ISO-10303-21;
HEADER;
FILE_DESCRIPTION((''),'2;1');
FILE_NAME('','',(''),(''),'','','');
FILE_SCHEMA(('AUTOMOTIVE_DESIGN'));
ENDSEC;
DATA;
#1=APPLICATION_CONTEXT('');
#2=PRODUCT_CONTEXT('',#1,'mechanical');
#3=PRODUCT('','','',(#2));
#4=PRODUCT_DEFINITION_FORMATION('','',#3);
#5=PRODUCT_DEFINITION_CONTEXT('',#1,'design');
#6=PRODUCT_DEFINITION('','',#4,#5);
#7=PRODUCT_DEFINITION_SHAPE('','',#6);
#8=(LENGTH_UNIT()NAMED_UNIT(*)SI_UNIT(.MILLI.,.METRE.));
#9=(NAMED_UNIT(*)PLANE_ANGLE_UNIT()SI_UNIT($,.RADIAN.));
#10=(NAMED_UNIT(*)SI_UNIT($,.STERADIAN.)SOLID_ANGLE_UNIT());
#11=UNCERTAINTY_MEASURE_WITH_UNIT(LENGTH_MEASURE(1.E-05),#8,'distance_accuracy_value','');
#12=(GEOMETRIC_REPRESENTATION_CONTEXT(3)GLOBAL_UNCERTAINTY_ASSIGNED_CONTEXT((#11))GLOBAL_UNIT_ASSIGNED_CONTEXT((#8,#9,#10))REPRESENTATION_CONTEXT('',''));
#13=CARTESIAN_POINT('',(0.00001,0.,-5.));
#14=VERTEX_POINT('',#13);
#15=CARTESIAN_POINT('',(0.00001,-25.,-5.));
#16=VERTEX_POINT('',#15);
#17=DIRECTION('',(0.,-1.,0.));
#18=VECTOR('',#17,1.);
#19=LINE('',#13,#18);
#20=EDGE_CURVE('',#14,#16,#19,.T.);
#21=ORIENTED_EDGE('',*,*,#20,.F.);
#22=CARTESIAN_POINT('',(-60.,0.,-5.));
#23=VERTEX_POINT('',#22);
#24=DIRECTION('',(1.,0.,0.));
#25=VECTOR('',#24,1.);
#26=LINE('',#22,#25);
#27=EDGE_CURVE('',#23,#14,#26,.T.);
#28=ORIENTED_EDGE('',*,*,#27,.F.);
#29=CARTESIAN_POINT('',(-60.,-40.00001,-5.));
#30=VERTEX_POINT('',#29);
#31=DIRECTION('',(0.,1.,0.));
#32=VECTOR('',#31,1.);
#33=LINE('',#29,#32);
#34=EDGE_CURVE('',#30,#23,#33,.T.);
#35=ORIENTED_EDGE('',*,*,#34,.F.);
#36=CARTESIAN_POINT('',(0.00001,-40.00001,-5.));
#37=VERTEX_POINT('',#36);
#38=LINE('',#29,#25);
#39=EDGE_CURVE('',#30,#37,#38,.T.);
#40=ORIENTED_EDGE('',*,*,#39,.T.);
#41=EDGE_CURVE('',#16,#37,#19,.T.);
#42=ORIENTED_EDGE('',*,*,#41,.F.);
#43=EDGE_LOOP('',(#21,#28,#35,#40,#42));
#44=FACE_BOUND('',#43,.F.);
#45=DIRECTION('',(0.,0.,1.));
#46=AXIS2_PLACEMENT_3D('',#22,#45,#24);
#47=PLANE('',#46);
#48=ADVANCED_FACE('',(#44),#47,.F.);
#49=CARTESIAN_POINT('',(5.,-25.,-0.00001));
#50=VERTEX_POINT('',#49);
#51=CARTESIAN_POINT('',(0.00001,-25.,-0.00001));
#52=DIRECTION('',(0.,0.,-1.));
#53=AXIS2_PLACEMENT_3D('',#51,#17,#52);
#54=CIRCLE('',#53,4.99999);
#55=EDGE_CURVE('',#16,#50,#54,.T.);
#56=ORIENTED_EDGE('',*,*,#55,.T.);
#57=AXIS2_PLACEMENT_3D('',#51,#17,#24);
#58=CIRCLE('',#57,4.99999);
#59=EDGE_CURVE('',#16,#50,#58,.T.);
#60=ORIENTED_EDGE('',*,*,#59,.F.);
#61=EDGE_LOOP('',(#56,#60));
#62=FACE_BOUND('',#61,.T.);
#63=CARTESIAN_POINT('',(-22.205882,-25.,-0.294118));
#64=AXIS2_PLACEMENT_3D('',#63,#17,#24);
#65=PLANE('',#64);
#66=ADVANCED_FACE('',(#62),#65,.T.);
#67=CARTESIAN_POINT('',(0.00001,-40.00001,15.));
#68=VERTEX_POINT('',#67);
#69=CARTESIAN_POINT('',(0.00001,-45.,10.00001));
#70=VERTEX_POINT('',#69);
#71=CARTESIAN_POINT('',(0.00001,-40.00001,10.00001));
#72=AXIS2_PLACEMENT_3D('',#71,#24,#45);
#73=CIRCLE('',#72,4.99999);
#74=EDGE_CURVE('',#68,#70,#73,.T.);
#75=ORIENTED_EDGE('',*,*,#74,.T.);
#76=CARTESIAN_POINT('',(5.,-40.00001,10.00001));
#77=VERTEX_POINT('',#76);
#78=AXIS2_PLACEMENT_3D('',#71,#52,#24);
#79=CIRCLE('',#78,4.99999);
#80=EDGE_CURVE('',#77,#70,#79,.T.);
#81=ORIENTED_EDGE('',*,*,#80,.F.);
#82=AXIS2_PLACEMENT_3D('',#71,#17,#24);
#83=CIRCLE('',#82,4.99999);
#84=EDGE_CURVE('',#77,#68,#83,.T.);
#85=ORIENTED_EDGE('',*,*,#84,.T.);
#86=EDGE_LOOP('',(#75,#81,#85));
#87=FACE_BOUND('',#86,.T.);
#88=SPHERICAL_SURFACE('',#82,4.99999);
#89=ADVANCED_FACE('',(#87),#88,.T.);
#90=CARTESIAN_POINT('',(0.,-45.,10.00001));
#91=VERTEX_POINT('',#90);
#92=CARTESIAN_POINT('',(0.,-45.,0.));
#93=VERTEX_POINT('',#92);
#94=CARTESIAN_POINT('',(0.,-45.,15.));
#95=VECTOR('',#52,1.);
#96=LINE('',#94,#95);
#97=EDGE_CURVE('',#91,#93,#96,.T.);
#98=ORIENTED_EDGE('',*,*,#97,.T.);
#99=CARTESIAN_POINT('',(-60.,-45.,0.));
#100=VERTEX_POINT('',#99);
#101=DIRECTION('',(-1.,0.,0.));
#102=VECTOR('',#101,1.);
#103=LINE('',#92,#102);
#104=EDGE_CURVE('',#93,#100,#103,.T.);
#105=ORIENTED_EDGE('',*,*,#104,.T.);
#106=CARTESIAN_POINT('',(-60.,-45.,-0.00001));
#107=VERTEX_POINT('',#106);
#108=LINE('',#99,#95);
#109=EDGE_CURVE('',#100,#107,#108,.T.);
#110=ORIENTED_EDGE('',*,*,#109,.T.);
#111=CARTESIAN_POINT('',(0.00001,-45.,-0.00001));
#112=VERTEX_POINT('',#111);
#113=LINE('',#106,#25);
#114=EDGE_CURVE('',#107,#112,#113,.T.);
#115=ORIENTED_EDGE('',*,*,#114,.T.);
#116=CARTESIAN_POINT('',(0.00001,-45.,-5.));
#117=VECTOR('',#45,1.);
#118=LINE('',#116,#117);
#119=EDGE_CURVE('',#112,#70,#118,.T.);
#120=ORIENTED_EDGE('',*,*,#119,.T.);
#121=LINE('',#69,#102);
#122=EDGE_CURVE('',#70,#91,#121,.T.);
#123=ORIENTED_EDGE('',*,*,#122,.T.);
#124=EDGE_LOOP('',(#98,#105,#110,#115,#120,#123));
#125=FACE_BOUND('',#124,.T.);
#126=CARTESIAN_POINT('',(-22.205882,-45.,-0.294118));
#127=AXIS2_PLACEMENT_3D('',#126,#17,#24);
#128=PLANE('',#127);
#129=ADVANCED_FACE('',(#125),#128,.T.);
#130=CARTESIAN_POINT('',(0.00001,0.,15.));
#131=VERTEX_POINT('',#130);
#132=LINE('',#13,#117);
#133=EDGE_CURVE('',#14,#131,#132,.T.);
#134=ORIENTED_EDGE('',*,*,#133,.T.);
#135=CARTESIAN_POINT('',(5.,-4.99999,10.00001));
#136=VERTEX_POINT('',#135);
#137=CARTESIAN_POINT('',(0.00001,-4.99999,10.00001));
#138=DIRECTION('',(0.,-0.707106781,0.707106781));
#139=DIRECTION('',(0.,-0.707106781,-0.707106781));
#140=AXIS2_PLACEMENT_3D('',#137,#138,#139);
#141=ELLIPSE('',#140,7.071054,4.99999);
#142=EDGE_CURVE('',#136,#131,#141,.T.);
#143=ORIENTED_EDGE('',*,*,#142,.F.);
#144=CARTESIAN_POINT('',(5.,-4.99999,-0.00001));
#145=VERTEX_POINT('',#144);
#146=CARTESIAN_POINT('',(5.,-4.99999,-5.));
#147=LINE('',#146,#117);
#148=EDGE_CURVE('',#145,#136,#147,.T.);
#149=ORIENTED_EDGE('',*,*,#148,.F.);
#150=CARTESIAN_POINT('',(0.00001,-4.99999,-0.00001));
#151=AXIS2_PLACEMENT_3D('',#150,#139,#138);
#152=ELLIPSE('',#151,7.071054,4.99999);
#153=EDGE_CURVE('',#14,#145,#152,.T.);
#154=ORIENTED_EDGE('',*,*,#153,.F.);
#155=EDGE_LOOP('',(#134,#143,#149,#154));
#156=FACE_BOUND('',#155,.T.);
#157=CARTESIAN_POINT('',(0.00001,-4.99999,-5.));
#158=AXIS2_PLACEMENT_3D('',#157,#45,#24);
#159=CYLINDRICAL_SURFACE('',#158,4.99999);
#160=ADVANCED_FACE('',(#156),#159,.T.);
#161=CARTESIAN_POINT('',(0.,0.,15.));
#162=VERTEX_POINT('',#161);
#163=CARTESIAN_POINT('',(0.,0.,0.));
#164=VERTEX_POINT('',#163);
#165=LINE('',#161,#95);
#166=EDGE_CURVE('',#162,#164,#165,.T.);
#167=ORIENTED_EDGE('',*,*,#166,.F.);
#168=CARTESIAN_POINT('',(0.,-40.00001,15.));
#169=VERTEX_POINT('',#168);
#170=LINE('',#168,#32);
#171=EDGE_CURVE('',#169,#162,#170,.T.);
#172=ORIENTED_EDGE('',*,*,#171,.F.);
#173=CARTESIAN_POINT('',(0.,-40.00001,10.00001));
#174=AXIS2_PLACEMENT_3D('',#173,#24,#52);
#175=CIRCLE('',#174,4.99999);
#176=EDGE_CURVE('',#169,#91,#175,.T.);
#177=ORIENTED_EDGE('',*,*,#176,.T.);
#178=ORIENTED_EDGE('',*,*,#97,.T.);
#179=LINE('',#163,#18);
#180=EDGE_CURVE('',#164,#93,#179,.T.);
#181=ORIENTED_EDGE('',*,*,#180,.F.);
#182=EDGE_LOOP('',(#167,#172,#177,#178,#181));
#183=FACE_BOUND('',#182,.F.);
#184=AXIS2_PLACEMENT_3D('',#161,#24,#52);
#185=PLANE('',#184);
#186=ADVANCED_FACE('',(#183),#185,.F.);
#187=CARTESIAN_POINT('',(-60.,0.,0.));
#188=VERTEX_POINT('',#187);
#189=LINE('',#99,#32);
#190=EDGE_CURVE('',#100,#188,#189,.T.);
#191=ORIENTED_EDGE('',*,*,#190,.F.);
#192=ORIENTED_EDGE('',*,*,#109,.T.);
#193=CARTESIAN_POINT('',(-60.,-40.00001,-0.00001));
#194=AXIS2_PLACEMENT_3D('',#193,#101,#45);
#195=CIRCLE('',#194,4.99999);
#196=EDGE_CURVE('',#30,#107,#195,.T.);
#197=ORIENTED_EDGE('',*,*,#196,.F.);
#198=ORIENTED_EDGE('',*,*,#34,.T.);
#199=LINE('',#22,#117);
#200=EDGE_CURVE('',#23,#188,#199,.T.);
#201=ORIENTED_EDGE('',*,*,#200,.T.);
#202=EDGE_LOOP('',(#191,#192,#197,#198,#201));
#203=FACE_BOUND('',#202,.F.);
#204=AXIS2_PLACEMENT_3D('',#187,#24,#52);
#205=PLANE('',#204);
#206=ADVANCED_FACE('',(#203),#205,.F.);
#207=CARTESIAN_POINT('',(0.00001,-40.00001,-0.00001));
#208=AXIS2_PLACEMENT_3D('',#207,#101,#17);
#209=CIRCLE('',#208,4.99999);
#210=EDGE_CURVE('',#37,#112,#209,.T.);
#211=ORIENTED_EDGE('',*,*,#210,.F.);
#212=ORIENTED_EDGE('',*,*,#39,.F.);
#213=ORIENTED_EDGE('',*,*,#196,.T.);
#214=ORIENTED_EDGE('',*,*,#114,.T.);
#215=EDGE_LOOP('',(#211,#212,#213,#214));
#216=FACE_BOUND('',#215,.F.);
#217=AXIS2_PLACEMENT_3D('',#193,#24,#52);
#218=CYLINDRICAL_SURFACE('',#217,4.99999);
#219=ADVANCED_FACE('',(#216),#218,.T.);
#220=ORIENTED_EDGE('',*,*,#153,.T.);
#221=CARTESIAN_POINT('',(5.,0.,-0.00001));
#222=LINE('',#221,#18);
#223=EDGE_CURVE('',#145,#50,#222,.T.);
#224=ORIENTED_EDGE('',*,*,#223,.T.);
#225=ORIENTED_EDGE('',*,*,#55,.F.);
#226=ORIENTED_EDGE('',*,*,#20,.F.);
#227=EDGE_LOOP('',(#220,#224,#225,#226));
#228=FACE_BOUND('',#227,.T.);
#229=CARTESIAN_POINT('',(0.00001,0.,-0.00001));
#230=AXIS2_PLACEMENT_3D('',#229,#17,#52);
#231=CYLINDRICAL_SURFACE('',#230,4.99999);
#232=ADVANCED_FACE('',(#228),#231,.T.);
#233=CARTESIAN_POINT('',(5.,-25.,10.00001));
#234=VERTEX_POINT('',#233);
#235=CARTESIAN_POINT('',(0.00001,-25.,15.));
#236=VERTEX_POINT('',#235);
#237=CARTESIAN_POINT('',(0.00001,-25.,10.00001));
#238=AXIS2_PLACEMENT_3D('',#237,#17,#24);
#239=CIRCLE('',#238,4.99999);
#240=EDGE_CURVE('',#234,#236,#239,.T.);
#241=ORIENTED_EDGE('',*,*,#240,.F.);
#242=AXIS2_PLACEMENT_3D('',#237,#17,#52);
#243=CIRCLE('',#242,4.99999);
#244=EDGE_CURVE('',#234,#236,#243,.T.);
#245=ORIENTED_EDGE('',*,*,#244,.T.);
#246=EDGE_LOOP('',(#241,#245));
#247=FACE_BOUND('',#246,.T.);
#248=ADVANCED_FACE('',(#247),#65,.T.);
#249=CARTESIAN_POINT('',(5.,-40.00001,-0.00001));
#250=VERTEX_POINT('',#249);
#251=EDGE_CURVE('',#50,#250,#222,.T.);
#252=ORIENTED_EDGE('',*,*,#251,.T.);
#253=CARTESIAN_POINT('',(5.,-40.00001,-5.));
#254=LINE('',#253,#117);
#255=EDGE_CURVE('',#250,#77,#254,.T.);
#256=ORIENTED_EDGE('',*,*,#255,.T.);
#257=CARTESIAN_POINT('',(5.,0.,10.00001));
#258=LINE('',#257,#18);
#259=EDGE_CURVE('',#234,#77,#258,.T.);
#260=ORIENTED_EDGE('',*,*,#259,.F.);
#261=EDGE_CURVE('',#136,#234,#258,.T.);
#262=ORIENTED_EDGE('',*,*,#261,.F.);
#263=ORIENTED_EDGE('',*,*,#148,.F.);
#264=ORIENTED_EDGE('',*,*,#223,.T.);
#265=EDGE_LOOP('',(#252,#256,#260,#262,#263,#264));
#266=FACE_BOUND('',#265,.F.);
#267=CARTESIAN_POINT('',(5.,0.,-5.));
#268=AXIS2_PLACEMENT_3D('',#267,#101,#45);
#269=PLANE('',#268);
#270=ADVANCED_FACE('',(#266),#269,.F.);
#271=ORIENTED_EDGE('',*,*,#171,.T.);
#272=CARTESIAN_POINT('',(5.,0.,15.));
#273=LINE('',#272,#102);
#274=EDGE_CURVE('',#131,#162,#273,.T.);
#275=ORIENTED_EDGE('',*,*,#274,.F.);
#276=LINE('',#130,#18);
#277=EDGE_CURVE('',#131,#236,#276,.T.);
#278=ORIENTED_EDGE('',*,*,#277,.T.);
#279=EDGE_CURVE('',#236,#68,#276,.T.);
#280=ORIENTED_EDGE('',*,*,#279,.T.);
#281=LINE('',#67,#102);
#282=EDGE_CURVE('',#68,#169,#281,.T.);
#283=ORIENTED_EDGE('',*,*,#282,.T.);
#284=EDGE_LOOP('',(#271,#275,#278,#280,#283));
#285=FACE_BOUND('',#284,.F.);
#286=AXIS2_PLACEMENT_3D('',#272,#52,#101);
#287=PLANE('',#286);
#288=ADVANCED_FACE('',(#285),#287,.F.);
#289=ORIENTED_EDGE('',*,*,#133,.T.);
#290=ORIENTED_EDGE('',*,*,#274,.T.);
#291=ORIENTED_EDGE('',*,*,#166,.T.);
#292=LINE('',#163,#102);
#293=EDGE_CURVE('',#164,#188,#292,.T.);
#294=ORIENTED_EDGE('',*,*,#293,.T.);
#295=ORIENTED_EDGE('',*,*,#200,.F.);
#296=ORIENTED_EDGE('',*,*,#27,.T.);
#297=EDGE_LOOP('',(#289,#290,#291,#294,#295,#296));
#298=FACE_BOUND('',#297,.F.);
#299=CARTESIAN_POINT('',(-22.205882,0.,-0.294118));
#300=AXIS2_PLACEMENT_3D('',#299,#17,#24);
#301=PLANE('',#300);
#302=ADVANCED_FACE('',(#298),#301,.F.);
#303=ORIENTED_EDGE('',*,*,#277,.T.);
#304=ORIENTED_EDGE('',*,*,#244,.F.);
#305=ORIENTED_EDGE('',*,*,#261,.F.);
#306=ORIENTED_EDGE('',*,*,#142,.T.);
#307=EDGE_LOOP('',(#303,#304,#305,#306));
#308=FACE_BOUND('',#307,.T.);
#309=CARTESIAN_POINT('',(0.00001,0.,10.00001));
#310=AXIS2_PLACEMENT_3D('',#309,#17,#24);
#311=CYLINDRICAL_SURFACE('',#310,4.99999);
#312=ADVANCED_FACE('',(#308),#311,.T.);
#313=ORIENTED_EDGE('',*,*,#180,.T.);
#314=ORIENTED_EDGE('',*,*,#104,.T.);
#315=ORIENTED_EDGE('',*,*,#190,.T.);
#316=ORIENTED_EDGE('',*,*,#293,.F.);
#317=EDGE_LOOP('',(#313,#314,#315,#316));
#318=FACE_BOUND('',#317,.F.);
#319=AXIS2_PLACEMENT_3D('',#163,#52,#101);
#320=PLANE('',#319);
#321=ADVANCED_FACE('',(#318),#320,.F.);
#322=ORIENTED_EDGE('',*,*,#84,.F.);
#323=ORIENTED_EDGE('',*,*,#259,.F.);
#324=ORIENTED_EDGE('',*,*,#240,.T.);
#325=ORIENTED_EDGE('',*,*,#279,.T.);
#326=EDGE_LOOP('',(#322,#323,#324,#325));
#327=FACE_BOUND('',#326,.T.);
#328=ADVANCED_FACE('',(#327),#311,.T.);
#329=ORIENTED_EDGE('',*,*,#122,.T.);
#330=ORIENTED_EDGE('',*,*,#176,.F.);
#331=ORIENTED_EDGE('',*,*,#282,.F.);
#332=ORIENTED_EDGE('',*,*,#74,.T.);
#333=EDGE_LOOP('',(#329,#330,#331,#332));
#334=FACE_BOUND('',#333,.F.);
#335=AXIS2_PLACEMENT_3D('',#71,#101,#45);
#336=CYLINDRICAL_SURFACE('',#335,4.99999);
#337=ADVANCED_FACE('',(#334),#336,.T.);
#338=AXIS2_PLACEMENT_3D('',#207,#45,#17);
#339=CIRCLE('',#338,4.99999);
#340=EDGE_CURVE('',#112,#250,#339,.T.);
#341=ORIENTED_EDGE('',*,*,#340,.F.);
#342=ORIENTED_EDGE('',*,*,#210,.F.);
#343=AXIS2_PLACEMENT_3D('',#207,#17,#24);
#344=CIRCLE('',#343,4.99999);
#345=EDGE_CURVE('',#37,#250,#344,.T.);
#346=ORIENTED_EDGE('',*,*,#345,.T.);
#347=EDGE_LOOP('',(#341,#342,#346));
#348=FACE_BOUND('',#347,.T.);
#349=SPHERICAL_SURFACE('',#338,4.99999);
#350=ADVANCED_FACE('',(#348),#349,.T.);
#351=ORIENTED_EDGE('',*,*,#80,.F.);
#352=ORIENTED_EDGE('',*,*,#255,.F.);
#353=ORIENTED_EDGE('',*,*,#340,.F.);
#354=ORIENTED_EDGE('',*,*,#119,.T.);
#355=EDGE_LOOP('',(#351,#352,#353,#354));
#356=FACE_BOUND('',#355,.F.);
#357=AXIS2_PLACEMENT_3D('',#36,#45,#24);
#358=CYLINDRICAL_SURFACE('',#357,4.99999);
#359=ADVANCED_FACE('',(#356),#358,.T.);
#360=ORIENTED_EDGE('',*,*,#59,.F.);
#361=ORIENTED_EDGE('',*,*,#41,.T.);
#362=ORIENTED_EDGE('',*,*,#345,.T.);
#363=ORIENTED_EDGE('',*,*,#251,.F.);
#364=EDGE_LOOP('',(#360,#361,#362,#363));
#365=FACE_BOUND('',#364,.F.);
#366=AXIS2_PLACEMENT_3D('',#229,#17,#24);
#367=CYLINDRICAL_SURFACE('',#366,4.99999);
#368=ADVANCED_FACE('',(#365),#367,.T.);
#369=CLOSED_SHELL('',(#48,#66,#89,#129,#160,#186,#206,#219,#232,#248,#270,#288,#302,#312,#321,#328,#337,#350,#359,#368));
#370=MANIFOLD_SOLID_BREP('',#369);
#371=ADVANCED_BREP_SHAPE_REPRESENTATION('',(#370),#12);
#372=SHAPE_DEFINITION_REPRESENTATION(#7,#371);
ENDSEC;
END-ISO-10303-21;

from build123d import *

# Parameters (mm, degrees)
F1_DEPTH = 45
F2_R     = 4.99999
F3_R     = 4.99999
F4_DEPTH = 25
F5_R     = 4.99999


# Not quite as in the source:
# - a fillet or chamfer is up to 0.001 mm smaller than in the source, because OpenCascade refuses the exact size


with BuildPart() as f1:
    # F0 (on Front) → F1 (new body)
    with BuildSketch(Plane.XZ):
        Polygon((0, 15), (0, 0), (-60, 0), (-60, -5), (5, -5), (5, 15), align=None)
    extrude(amount=F1_DEPTH)

    # F2 (radius 5 in the source; OpenCascade refuses exactly that, so slightly less here)
    f2_edges = [f1.edges().sort_by_distance(p)[0] for p in [
        (5, -22.5, 15),
    ]]
    fillet(f2_edges, radius=F2_R)

    # F3 (radius 5 in the source; OpenCascade refuses exactly that, so slightly less here)
    f3_edges = [f1.edges().sort_by_distance(p)[0] for p in [
        (5, -45, 2.500005),
        (-27.5, -45, -5),
        (3.535537, -45, 13.535537),
        (-27.5, 0, -5),
        (5, 0, 2.500005),
        (5, -22.5, -5),
    ]]
    fillet(f3_edges, radius=F3_R)

    # F0 (on Front) → F4 (join)
    with BuildSketch(Plane.XZ):
        Polygon((0, 15), (0, 0), (-60, 0), (-60, -5), (5, -5), (5, 15), align=None)
    extrude(amount=F4_DEPTH)

    # F5 (radius 5 in the source; OpenCascade refuses exactly that, so slightly less here)
    f5_edges = [f1.edges().sort_by_distance(p)[0] for p in [
        (5, -12.5, 15),
        (5, -12.5, -5),
        (5, 0, 5),
    ]]
    fillet(f5_edges, radius=F5_R)


solid = f1.part
